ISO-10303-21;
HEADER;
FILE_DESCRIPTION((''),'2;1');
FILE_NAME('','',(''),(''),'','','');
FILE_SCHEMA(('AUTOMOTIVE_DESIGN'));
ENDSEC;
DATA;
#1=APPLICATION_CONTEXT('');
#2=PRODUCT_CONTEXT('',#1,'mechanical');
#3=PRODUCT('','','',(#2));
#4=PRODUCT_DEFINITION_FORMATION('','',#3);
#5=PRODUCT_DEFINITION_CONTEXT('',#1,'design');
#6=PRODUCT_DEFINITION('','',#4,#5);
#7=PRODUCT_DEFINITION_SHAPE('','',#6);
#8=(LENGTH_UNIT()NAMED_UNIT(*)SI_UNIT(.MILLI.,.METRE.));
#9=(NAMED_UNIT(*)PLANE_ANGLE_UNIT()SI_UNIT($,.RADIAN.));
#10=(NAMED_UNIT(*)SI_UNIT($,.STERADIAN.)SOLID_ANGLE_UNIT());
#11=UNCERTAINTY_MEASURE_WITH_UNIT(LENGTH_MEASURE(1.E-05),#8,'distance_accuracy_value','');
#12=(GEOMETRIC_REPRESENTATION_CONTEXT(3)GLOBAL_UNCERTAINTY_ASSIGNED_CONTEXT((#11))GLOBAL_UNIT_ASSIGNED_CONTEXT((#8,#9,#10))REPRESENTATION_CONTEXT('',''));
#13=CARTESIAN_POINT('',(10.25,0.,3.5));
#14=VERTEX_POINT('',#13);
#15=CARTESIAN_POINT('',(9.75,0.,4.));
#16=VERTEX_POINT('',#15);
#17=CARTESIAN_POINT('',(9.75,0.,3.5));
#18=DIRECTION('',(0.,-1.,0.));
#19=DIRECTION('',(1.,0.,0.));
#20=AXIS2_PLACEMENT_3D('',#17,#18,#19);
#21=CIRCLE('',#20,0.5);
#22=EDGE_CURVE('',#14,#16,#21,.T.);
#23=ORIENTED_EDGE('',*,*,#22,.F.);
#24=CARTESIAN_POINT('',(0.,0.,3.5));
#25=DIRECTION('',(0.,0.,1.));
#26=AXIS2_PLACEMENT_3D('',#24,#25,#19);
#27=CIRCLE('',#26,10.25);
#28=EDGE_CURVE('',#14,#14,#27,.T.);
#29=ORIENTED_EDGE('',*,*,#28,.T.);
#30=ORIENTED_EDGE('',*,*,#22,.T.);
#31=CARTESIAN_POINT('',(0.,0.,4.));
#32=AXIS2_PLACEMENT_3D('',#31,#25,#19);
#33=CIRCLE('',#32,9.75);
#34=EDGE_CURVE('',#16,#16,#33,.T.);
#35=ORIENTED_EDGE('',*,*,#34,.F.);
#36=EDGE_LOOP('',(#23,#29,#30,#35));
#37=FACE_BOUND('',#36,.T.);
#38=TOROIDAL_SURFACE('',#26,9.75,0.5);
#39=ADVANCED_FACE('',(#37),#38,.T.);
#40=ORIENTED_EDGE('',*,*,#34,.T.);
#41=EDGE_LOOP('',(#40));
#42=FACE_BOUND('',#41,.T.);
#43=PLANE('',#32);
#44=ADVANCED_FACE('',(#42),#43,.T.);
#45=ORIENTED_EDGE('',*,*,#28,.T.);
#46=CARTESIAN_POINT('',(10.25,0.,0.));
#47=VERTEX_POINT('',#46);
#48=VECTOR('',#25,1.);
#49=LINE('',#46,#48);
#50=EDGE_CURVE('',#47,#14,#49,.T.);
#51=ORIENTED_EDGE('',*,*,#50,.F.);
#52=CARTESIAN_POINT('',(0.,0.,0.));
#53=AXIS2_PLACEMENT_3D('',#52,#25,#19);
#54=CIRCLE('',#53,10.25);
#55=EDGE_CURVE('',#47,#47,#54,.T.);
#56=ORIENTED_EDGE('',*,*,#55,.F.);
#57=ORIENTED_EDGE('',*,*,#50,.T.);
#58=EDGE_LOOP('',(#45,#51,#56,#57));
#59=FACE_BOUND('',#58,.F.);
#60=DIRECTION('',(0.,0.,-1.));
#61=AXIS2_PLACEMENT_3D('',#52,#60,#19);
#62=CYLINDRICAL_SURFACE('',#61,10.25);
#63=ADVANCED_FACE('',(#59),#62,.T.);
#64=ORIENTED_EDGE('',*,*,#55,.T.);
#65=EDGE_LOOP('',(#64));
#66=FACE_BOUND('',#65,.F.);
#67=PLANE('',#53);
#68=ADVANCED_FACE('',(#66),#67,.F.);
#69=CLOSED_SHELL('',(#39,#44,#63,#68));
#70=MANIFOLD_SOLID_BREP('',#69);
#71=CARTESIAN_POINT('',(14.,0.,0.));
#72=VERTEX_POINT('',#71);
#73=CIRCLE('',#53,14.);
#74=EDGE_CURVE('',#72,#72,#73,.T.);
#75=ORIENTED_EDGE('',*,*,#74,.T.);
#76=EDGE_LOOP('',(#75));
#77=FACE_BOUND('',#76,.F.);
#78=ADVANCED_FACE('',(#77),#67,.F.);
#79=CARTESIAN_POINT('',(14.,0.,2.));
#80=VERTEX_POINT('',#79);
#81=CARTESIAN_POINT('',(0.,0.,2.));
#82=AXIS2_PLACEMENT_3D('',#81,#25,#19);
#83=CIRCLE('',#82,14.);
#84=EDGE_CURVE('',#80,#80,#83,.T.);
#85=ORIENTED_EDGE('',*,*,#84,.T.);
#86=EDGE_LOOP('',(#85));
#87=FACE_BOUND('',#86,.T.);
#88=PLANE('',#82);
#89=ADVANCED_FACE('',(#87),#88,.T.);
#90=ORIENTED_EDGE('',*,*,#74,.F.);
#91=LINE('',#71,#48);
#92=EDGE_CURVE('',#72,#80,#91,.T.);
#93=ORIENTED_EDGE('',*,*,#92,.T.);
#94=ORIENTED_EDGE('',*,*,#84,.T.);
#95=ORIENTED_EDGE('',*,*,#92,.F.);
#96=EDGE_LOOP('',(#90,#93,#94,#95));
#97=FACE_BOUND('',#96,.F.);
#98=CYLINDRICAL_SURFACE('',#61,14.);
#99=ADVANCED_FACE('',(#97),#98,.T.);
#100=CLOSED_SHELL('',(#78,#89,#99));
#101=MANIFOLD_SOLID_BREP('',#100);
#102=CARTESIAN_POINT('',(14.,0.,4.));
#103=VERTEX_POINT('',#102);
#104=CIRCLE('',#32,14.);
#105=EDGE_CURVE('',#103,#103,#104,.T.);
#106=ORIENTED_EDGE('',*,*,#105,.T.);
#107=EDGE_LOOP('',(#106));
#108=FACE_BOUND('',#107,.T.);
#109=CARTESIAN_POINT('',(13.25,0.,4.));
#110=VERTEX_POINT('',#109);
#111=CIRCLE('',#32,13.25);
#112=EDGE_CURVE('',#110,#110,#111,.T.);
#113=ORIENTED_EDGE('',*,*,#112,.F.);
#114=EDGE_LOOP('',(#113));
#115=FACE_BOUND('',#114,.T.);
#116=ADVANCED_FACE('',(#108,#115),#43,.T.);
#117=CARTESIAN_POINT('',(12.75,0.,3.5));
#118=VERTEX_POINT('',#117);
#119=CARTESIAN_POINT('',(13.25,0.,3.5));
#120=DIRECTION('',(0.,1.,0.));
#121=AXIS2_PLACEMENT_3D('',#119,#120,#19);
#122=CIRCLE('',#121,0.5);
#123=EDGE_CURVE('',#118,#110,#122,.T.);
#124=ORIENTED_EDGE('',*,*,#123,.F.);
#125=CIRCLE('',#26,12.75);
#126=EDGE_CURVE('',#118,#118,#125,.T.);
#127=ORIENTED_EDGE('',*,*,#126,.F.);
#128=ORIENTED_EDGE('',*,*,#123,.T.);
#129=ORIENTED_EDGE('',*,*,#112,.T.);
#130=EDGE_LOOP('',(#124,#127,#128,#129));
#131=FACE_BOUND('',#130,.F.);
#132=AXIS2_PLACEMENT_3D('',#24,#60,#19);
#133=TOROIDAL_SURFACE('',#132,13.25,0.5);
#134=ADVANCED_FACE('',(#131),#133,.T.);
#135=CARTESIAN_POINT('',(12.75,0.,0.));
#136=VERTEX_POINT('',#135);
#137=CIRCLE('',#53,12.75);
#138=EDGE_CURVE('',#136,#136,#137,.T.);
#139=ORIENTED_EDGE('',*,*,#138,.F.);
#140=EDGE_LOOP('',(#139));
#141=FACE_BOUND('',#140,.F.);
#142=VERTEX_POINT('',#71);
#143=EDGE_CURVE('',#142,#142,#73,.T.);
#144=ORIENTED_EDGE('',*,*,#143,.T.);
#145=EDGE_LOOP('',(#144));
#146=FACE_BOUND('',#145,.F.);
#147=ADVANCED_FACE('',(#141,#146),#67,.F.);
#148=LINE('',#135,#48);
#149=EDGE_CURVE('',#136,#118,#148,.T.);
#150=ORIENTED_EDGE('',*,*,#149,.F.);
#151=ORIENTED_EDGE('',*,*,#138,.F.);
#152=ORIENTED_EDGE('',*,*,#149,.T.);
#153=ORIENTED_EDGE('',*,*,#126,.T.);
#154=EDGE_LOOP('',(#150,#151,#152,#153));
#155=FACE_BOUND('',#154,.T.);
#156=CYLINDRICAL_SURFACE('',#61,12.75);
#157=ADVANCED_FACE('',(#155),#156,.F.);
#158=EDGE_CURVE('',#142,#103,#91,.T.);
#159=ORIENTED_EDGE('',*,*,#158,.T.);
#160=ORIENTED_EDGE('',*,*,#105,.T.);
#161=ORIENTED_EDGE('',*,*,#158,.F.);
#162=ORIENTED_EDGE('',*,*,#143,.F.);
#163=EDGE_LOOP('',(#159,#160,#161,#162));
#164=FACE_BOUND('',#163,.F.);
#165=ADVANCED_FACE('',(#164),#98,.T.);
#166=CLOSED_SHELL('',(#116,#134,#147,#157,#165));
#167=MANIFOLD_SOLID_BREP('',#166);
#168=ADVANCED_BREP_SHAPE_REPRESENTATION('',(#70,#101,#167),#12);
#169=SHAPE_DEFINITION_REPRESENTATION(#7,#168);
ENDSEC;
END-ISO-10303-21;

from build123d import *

# Parameters (mm, degrees)
F0_R     = 14
F0_R_2   = 12.75
F0_R_3   = 10.25
F1_DEPTH = 2
F2_DEPTH = 4
F3_R     = 0.5
F4_R     = 0.5


with BuildPart() as f1:
    # F0 (on Top) → F1 (new body)
    with BuildSketch(Plane.XY):
        Circle(F0_R)
        Circle(F0_R_2, mode=Mode.SUBTRACT)
        Circle(F0_R_2)
        Circle(F0_R_3, mode=Mode.SUBTRACT)
        Circle(F0_R_3)
    extrude(amount=F1_DEPTH)


with BuildPart() as f2:
    # F0 (on Top) → F2 (new body)
    with BuildSketch(Plane.XY):
        Circle(F0_R)
        Circle(F0_R_2, mode=Mode.SUBTRACT)
    extrude(amount=F2_DEPTH)

    # F4
    f4_edges = [f2.edges().sort_by_distance(p)[0] for p in [
        (-12.75, 0, 4),
    ]]
    fillet(f4_edges, radius=F4_R)


with BuildPart() as f2b:
    # F0 (on Top) → F2, piece 2 (new body)
    with BuildSketch(Plane.XY):
        Circle(F0_R_3)
    extrude(amount=F2_DEPTH)

    # F3
    f3_edges = [f2b.edges().sort_by_distance(p)[0] for p in [
        (-10.25, 0, 4),
    ]]
    fillet(f3_edges, radius=F3_R)


solid = Compound([f1.part, f2.part, f2b.part])
